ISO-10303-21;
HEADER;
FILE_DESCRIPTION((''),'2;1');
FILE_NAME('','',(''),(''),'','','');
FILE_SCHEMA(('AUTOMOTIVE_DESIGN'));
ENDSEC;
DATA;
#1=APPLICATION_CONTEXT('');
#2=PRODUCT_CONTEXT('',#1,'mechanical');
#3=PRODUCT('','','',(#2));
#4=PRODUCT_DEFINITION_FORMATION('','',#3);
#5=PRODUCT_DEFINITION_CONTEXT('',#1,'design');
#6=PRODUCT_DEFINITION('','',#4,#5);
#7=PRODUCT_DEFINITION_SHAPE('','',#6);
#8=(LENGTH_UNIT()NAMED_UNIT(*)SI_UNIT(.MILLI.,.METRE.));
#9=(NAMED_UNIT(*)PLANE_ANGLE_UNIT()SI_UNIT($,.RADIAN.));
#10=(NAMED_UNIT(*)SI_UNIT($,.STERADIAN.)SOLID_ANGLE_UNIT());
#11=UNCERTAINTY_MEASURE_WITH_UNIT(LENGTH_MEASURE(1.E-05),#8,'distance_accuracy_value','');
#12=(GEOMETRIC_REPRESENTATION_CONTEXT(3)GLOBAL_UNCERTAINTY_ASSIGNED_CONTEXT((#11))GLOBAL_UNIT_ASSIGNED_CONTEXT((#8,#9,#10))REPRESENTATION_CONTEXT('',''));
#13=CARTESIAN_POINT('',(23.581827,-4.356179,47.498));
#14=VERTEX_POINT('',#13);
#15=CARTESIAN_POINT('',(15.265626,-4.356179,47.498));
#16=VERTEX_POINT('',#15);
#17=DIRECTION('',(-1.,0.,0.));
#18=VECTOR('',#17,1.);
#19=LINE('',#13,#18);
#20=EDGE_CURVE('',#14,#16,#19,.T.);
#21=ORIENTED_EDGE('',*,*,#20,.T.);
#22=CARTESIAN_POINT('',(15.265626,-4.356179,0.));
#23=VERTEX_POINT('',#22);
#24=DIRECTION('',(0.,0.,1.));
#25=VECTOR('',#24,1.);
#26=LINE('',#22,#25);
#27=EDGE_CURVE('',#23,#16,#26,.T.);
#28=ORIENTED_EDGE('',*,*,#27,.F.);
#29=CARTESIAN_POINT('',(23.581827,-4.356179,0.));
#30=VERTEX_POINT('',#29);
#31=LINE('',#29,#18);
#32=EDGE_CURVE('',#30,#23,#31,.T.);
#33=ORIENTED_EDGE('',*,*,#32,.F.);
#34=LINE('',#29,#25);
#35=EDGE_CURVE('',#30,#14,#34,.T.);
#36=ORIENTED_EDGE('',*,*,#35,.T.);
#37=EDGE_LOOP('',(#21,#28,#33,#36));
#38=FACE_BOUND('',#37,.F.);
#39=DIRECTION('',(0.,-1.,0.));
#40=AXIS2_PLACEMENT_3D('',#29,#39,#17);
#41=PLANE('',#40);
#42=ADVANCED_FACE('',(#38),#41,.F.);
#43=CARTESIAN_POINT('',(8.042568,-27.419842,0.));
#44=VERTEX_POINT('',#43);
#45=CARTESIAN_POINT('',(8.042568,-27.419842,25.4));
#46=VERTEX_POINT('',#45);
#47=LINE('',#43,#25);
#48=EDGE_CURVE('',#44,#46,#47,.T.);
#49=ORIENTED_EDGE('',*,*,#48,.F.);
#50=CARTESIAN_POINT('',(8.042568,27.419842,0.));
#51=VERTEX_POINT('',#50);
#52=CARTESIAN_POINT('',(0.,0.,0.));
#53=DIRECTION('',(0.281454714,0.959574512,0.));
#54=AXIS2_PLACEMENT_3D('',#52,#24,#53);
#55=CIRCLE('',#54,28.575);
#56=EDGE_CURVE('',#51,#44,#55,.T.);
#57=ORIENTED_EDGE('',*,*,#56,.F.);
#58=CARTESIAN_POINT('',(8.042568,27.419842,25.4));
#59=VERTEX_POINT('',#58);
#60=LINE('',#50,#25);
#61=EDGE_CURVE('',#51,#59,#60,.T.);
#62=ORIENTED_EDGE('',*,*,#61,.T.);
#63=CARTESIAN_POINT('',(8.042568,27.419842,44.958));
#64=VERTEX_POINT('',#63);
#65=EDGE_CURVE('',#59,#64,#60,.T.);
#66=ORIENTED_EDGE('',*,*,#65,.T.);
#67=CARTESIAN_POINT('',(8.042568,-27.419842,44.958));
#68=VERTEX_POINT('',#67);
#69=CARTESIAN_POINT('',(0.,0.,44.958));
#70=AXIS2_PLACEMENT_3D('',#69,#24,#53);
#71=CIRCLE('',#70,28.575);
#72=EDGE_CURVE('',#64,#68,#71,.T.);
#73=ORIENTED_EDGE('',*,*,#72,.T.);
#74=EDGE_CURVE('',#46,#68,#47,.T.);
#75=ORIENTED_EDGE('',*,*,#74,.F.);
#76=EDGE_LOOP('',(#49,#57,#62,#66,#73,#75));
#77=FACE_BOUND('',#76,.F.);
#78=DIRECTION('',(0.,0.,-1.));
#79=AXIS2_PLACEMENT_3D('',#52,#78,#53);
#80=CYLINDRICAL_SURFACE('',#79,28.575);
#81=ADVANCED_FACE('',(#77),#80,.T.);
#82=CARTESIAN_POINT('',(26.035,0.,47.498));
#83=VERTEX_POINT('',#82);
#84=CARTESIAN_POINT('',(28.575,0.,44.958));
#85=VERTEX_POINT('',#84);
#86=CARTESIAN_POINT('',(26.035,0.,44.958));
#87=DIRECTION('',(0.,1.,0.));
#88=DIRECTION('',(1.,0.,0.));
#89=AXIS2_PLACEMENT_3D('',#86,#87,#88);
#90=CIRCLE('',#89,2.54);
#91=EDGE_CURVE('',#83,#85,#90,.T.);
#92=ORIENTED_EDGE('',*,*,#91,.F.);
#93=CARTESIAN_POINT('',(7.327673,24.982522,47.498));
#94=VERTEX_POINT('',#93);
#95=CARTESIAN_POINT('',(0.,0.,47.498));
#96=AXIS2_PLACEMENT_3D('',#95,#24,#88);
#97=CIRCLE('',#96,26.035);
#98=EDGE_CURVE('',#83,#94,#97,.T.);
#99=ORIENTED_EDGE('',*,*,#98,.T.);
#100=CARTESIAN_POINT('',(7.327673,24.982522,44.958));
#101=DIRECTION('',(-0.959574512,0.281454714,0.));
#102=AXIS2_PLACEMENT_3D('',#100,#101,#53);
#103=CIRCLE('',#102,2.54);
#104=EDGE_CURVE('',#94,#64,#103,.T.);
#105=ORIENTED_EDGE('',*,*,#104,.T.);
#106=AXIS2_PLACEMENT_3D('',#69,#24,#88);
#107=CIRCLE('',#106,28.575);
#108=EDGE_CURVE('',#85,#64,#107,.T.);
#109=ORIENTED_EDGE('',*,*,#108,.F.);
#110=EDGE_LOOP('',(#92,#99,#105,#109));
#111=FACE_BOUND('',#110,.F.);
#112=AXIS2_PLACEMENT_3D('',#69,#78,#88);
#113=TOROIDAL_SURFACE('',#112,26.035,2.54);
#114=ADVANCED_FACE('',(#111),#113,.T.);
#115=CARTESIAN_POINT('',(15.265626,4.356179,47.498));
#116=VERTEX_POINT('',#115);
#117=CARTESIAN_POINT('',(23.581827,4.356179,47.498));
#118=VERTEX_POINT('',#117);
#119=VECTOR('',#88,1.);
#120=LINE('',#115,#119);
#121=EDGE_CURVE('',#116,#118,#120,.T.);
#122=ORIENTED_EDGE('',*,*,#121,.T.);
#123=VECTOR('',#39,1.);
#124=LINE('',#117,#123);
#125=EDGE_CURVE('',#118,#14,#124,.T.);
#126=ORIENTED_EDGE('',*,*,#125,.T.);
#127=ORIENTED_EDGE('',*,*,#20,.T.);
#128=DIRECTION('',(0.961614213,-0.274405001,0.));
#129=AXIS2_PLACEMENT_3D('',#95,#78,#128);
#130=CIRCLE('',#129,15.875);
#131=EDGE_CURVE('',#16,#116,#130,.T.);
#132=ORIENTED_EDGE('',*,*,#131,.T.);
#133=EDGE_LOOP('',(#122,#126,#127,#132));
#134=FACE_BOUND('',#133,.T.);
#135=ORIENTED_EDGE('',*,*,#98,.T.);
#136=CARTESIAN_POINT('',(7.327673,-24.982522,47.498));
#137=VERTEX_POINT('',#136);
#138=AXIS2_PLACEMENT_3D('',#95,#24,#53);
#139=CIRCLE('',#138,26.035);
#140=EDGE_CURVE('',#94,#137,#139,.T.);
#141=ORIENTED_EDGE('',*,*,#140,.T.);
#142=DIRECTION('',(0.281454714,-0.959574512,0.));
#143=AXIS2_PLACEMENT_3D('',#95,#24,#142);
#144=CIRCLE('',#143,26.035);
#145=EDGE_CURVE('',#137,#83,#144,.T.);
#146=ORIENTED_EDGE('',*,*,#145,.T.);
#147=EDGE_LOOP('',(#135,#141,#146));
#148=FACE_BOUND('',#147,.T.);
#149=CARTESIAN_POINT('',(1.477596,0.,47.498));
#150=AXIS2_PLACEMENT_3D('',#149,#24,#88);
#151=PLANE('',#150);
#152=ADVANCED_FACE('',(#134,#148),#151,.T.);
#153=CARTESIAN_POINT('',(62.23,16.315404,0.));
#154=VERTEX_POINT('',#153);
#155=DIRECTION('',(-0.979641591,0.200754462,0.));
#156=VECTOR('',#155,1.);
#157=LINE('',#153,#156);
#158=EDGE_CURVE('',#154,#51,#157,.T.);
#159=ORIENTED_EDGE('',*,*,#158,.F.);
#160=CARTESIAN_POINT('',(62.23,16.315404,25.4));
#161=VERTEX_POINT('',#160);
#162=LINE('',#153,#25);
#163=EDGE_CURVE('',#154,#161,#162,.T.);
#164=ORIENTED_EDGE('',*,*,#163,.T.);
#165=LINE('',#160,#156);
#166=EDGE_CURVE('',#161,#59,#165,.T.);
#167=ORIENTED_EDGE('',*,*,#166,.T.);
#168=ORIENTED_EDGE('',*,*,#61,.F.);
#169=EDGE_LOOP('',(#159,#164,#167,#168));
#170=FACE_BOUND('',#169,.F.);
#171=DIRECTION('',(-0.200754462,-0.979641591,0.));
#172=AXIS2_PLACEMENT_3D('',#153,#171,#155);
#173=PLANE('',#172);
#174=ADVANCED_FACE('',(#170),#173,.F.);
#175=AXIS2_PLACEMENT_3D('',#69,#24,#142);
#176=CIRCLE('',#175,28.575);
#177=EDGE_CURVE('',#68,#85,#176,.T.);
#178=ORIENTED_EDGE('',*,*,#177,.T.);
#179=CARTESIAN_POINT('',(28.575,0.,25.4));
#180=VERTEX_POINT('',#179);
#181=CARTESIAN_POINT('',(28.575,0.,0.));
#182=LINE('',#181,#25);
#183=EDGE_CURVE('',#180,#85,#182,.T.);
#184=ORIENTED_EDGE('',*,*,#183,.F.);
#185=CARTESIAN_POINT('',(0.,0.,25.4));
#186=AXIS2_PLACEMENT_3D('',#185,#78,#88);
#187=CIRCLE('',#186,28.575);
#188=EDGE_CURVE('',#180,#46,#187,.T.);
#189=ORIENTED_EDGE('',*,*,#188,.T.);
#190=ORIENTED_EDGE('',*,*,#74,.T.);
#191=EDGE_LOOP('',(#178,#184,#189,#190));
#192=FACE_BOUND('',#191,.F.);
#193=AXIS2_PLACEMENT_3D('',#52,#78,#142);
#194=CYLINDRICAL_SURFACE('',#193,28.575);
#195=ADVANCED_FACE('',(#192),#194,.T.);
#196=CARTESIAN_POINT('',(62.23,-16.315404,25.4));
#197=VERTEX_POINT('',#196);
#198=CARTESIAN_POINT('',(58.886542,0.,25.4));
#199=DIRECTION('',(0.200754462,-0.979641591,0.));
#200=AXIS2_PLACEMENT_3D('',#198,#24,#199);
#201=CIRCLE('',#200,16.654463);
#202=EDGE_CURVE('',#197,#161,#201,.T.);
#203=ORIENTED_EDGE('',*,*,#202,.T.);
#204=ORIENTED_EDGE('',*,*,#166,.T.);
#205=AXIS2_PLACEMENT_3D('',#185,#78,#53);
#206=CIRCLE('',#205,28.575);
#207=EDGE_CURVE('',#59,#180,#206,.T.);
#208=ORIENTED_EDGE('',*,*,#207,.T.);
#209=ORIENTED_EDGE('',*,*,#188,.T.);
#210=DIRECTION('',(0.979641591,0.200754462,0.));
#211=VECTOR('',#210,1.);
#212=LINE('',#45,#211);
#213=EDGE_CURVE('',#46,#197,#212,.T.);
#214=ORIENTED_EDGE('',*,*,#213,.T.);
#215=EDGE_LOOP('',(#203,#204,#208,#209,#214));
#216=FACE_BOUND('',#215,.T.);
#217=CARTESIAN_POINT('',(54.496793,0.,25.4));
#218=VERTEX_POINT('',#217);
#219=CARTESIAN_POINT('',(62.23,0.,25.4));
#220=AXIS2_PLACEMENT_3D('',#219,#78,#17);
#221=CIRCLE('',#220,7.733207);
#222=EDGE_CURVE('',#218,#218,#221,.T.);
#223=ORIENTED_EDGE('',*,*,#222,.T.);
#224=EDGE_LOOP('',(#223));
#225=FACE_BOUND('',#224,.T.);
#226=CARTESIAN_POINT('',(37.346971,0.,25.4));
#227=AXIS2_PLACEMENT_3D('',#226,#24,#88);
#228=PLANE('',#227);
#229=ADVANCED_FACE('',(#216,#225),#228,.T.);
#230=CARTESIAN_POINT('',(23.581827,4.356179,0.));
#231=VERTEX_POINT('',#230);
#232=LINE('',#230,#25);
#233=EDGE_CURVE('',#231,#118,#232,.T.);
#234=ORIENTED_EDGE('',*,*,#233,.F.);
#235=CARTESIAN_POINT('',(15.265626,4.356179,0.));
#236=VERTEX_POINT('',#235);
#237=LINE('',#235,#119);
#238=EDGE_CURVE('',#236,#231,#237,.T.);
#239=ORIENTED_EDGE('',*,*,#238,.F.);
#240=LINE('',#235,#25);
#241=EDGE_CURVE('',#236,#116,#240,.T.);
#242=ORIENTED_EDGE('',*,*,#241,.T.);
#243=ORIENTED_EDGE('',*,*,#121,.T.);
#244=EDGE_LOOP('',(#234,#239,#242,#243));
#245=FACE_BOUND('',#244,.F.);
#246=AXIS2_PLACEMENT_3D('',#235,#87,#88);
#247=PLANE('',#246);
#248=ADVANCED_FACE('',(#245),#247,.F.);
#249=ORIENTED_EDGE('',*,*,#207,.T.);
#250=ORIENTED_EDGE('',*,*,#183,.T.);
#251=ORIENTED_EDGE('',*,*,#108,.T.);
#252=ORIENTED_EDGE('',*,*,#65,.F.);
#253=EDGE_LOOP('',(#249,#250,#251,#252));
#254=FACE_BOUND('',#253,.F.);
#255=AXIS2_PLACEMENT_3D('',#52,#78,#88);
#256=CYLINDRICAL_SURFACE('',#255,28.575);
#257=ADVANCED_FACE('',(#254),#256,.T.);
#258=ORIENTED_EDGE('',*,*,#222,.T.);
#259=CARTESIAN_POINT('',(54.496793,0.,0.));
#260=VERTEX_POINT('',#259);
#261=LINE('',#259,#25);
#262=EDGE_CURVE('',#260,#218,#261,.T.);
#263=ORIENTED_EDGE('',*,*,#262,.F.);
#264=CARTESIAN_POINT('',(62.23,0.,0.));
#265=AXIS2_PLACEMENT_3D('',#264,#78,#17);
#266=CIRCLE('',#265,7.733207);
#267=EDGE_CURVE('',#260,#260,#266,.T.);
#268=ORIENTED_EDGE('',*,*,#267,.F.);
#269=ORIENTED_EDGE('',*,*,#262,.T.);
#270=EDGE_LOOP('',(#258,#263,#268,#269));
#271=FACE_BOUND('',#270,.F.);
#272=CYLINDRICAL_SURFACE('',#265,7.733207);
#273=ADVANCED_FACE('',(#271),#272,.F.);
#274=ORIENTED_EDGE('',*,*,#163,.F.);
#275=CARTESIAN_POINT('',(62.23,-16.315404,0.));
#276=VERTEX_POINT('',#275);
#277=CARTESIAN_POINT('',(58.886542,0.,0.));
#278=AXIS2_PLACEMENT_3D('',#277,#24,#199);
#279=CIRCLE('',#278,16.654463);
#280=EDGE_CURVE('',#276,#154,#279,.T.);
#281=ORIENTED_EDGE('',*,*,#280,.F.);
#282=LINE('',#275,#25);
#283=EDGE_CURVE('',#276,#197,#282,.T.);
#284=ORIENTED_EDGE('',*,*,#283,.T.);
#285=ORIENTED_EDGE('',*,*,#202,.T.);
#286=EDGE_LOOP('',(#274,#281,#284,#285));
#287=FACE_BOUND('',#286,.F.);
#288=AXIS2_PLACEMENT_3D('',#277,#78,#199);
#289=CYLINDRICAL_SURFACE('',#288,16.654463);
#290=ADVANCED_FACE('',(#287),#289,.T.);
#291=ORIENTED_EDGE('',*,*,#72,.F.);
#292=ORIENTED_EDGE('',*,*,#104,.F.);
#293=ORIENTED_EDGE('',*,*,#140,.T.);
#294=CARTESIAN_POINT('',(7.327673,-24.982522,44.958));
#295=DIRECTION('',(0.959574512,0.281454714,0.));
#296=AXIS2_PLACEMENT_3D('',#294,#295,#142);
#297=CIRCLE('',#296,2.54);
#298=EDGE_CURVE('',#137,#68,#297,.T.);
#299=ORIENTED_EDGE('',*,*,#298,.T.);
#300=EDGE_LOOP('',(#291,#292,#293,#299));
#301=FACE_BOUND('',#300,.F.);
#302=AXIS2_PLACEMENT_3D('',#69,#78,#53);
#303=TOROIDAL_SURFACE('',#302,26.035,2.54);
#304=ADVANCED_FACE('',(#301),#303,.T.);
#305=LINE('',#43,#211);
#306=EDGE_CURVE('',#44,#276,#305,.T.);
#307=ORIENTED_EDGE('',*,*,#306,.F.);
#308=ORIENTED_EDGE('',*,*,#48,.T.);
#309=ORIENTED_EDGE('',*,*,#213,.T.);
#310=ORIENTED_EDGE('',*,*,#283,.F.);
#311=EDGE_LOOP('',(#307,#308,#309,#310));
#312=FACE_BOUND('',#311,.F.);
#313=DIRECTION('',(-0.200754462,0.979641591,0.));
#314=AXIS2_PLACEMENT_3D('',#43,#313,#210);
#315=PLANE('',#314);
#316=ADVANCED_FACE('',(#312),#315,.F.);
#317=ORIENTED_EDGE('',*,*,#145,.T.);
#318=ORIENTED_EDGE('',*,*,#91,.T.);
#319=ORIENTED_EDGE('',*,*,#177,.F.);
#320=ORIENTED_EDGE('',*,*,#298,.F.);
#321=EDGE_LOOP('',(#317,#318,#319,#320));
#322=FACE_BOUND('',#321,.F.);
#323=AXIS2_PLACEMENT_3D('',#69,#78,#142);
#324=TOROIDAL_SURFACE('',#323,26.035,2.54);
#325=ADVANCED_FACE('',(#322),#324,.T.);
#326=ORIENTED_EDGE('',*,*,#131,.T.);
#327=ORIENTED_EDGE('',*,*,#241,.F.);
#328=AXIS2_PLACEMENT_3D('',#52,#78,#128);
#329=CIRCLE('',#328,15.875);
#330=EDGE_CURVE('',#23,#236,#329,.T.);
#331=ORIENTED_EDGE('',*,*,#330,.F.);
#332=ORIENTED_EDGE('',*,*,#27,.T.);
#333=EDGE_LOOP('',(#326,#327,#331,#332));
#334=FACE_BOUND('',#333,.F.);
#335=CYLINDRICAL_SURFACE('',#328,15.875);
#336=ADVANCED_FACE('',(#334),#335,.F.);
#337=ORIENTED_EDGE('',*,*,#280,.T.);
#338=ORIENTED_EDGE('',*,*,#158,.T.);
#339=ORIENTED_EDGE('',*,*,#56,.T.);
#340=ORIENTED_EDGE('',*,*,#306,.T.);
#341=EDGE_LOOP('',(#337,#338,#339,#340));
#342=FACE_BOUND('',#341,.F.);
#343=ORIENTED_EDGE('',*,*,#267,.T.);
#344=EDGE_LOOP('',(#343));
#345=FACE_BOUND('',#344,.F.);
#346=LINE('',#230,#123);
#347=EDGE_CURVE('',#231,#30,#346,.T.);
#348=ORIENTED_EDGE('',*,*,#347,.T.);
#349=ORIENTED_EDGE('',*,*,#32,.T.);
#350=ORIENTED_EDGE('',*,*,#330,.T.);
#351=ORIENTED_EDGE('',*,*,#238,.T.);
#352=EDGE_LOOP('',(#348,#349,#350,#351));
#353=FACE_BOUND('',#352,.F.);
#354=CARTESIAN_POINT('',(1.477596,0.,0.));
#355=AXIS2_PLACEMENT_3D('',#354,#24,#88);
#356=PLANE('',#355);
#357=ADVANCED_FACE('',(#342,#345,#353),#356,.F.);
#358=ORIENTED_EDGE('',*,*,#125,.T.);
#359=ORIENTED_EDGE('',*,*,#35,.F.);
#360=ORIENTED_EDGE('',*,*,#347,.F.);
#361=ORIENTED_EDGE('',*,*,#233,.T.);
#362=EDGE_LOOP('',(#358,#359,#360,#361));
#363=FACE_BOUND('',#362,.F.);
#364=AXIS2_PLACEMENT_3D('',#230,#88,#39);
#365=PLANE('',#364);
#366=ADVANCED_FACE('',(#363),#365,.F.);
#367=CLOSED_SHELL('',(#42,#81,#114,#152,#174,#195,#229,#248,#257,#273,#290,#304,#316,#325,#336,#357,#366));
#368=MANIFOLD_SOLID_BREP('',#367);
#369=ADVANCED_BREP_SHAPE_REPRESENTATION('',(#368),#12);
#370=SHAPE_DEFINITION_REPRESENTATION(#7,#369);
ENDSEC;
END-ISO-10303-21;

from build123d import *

# Parameters (mm, degrees)
F1_DEPTH = 25.4
F2_DEPTH = 47.498
F3_R     = 2.54


with BuildPart() as f1:
    # F0 (on Top) → F1 (new body)
    with BuildSketch(Plane.XY):
        with BuildLine():
            ThreePointArc((8.0425684433, 27.4198416814), (22.8729864498, 17.1276710579), (28.575, 0))
            ThreePointArc((28.575, 0), (22.8729864498, -17.1276710579), (8.0425684433, -27.4198416814))
            Line((8.0425684433, -27.4198416814), (62.23, -16.3154043257))
            ThreePointArc((62.23, -16.3154043257), (75.5410049965, 0), (62.23, 16.3154043257))
            Line((62.23, 16.3154043257), (8.0425684433, 27.4198416814))
        make_face()
        with BuildLine():
            ThreePointArc((69.9632073706, 0), (62.23, -7.7332073706), (54.4967926294, 0))
            ThreePointArc((54.4967926294, 0), (62.23, 7.7332073706), (69.9632073706, 0))
        make_face(mode=Mode.SUBTRACT)
    extrude(amount=F1_DEPTH)

    # F0 (on Top) → F2 (join)
    with BuildSketch(Plane.XY):
        with BuildLine():
            ThreePointArc((8.0425684433, -27.4198416814), (22.8729864498, -17.1276710579), (28.575, 0))
            ThreePointArc((28.575, 0), (22.8729864498, 17.1276710579), (8.0425684433, 27.4198416814))
            ThreePointArc((8.0425684433, 27.4198416814), (-28.575, 0), (8.0425684433, -27.4198416814))
        make_face()
        with BuildLine():
            Line((23.5818270594, 4.3561793864), (23.5818270594, 0))
            Line((23.5818270594, 0), (23.5818270594, -4.3561793864))
            Line((23.5818270594, -4.3561793864), (15.2656256391, -4.3561793864))
            ThreePointArc((15.2656256391, -4.3561793864), (-15.875, 0), (15.2656256391, 4.3561793864))
            Line((15.2656256391, 4.3561793864), (23.5818270594, 4.3561793864))
        make_face(mode=Mode.SUBTRACT)
    extrude(amount=F2_DEPTH)

    # F3
    f3_edges = [f1.edges().sort_by_distance(p)[0] for p in [
        (-8.042568, 27.419842, 47.498),
    ]]
    fillet(f3_edges, radius=F3_R)


solid = f1.part
